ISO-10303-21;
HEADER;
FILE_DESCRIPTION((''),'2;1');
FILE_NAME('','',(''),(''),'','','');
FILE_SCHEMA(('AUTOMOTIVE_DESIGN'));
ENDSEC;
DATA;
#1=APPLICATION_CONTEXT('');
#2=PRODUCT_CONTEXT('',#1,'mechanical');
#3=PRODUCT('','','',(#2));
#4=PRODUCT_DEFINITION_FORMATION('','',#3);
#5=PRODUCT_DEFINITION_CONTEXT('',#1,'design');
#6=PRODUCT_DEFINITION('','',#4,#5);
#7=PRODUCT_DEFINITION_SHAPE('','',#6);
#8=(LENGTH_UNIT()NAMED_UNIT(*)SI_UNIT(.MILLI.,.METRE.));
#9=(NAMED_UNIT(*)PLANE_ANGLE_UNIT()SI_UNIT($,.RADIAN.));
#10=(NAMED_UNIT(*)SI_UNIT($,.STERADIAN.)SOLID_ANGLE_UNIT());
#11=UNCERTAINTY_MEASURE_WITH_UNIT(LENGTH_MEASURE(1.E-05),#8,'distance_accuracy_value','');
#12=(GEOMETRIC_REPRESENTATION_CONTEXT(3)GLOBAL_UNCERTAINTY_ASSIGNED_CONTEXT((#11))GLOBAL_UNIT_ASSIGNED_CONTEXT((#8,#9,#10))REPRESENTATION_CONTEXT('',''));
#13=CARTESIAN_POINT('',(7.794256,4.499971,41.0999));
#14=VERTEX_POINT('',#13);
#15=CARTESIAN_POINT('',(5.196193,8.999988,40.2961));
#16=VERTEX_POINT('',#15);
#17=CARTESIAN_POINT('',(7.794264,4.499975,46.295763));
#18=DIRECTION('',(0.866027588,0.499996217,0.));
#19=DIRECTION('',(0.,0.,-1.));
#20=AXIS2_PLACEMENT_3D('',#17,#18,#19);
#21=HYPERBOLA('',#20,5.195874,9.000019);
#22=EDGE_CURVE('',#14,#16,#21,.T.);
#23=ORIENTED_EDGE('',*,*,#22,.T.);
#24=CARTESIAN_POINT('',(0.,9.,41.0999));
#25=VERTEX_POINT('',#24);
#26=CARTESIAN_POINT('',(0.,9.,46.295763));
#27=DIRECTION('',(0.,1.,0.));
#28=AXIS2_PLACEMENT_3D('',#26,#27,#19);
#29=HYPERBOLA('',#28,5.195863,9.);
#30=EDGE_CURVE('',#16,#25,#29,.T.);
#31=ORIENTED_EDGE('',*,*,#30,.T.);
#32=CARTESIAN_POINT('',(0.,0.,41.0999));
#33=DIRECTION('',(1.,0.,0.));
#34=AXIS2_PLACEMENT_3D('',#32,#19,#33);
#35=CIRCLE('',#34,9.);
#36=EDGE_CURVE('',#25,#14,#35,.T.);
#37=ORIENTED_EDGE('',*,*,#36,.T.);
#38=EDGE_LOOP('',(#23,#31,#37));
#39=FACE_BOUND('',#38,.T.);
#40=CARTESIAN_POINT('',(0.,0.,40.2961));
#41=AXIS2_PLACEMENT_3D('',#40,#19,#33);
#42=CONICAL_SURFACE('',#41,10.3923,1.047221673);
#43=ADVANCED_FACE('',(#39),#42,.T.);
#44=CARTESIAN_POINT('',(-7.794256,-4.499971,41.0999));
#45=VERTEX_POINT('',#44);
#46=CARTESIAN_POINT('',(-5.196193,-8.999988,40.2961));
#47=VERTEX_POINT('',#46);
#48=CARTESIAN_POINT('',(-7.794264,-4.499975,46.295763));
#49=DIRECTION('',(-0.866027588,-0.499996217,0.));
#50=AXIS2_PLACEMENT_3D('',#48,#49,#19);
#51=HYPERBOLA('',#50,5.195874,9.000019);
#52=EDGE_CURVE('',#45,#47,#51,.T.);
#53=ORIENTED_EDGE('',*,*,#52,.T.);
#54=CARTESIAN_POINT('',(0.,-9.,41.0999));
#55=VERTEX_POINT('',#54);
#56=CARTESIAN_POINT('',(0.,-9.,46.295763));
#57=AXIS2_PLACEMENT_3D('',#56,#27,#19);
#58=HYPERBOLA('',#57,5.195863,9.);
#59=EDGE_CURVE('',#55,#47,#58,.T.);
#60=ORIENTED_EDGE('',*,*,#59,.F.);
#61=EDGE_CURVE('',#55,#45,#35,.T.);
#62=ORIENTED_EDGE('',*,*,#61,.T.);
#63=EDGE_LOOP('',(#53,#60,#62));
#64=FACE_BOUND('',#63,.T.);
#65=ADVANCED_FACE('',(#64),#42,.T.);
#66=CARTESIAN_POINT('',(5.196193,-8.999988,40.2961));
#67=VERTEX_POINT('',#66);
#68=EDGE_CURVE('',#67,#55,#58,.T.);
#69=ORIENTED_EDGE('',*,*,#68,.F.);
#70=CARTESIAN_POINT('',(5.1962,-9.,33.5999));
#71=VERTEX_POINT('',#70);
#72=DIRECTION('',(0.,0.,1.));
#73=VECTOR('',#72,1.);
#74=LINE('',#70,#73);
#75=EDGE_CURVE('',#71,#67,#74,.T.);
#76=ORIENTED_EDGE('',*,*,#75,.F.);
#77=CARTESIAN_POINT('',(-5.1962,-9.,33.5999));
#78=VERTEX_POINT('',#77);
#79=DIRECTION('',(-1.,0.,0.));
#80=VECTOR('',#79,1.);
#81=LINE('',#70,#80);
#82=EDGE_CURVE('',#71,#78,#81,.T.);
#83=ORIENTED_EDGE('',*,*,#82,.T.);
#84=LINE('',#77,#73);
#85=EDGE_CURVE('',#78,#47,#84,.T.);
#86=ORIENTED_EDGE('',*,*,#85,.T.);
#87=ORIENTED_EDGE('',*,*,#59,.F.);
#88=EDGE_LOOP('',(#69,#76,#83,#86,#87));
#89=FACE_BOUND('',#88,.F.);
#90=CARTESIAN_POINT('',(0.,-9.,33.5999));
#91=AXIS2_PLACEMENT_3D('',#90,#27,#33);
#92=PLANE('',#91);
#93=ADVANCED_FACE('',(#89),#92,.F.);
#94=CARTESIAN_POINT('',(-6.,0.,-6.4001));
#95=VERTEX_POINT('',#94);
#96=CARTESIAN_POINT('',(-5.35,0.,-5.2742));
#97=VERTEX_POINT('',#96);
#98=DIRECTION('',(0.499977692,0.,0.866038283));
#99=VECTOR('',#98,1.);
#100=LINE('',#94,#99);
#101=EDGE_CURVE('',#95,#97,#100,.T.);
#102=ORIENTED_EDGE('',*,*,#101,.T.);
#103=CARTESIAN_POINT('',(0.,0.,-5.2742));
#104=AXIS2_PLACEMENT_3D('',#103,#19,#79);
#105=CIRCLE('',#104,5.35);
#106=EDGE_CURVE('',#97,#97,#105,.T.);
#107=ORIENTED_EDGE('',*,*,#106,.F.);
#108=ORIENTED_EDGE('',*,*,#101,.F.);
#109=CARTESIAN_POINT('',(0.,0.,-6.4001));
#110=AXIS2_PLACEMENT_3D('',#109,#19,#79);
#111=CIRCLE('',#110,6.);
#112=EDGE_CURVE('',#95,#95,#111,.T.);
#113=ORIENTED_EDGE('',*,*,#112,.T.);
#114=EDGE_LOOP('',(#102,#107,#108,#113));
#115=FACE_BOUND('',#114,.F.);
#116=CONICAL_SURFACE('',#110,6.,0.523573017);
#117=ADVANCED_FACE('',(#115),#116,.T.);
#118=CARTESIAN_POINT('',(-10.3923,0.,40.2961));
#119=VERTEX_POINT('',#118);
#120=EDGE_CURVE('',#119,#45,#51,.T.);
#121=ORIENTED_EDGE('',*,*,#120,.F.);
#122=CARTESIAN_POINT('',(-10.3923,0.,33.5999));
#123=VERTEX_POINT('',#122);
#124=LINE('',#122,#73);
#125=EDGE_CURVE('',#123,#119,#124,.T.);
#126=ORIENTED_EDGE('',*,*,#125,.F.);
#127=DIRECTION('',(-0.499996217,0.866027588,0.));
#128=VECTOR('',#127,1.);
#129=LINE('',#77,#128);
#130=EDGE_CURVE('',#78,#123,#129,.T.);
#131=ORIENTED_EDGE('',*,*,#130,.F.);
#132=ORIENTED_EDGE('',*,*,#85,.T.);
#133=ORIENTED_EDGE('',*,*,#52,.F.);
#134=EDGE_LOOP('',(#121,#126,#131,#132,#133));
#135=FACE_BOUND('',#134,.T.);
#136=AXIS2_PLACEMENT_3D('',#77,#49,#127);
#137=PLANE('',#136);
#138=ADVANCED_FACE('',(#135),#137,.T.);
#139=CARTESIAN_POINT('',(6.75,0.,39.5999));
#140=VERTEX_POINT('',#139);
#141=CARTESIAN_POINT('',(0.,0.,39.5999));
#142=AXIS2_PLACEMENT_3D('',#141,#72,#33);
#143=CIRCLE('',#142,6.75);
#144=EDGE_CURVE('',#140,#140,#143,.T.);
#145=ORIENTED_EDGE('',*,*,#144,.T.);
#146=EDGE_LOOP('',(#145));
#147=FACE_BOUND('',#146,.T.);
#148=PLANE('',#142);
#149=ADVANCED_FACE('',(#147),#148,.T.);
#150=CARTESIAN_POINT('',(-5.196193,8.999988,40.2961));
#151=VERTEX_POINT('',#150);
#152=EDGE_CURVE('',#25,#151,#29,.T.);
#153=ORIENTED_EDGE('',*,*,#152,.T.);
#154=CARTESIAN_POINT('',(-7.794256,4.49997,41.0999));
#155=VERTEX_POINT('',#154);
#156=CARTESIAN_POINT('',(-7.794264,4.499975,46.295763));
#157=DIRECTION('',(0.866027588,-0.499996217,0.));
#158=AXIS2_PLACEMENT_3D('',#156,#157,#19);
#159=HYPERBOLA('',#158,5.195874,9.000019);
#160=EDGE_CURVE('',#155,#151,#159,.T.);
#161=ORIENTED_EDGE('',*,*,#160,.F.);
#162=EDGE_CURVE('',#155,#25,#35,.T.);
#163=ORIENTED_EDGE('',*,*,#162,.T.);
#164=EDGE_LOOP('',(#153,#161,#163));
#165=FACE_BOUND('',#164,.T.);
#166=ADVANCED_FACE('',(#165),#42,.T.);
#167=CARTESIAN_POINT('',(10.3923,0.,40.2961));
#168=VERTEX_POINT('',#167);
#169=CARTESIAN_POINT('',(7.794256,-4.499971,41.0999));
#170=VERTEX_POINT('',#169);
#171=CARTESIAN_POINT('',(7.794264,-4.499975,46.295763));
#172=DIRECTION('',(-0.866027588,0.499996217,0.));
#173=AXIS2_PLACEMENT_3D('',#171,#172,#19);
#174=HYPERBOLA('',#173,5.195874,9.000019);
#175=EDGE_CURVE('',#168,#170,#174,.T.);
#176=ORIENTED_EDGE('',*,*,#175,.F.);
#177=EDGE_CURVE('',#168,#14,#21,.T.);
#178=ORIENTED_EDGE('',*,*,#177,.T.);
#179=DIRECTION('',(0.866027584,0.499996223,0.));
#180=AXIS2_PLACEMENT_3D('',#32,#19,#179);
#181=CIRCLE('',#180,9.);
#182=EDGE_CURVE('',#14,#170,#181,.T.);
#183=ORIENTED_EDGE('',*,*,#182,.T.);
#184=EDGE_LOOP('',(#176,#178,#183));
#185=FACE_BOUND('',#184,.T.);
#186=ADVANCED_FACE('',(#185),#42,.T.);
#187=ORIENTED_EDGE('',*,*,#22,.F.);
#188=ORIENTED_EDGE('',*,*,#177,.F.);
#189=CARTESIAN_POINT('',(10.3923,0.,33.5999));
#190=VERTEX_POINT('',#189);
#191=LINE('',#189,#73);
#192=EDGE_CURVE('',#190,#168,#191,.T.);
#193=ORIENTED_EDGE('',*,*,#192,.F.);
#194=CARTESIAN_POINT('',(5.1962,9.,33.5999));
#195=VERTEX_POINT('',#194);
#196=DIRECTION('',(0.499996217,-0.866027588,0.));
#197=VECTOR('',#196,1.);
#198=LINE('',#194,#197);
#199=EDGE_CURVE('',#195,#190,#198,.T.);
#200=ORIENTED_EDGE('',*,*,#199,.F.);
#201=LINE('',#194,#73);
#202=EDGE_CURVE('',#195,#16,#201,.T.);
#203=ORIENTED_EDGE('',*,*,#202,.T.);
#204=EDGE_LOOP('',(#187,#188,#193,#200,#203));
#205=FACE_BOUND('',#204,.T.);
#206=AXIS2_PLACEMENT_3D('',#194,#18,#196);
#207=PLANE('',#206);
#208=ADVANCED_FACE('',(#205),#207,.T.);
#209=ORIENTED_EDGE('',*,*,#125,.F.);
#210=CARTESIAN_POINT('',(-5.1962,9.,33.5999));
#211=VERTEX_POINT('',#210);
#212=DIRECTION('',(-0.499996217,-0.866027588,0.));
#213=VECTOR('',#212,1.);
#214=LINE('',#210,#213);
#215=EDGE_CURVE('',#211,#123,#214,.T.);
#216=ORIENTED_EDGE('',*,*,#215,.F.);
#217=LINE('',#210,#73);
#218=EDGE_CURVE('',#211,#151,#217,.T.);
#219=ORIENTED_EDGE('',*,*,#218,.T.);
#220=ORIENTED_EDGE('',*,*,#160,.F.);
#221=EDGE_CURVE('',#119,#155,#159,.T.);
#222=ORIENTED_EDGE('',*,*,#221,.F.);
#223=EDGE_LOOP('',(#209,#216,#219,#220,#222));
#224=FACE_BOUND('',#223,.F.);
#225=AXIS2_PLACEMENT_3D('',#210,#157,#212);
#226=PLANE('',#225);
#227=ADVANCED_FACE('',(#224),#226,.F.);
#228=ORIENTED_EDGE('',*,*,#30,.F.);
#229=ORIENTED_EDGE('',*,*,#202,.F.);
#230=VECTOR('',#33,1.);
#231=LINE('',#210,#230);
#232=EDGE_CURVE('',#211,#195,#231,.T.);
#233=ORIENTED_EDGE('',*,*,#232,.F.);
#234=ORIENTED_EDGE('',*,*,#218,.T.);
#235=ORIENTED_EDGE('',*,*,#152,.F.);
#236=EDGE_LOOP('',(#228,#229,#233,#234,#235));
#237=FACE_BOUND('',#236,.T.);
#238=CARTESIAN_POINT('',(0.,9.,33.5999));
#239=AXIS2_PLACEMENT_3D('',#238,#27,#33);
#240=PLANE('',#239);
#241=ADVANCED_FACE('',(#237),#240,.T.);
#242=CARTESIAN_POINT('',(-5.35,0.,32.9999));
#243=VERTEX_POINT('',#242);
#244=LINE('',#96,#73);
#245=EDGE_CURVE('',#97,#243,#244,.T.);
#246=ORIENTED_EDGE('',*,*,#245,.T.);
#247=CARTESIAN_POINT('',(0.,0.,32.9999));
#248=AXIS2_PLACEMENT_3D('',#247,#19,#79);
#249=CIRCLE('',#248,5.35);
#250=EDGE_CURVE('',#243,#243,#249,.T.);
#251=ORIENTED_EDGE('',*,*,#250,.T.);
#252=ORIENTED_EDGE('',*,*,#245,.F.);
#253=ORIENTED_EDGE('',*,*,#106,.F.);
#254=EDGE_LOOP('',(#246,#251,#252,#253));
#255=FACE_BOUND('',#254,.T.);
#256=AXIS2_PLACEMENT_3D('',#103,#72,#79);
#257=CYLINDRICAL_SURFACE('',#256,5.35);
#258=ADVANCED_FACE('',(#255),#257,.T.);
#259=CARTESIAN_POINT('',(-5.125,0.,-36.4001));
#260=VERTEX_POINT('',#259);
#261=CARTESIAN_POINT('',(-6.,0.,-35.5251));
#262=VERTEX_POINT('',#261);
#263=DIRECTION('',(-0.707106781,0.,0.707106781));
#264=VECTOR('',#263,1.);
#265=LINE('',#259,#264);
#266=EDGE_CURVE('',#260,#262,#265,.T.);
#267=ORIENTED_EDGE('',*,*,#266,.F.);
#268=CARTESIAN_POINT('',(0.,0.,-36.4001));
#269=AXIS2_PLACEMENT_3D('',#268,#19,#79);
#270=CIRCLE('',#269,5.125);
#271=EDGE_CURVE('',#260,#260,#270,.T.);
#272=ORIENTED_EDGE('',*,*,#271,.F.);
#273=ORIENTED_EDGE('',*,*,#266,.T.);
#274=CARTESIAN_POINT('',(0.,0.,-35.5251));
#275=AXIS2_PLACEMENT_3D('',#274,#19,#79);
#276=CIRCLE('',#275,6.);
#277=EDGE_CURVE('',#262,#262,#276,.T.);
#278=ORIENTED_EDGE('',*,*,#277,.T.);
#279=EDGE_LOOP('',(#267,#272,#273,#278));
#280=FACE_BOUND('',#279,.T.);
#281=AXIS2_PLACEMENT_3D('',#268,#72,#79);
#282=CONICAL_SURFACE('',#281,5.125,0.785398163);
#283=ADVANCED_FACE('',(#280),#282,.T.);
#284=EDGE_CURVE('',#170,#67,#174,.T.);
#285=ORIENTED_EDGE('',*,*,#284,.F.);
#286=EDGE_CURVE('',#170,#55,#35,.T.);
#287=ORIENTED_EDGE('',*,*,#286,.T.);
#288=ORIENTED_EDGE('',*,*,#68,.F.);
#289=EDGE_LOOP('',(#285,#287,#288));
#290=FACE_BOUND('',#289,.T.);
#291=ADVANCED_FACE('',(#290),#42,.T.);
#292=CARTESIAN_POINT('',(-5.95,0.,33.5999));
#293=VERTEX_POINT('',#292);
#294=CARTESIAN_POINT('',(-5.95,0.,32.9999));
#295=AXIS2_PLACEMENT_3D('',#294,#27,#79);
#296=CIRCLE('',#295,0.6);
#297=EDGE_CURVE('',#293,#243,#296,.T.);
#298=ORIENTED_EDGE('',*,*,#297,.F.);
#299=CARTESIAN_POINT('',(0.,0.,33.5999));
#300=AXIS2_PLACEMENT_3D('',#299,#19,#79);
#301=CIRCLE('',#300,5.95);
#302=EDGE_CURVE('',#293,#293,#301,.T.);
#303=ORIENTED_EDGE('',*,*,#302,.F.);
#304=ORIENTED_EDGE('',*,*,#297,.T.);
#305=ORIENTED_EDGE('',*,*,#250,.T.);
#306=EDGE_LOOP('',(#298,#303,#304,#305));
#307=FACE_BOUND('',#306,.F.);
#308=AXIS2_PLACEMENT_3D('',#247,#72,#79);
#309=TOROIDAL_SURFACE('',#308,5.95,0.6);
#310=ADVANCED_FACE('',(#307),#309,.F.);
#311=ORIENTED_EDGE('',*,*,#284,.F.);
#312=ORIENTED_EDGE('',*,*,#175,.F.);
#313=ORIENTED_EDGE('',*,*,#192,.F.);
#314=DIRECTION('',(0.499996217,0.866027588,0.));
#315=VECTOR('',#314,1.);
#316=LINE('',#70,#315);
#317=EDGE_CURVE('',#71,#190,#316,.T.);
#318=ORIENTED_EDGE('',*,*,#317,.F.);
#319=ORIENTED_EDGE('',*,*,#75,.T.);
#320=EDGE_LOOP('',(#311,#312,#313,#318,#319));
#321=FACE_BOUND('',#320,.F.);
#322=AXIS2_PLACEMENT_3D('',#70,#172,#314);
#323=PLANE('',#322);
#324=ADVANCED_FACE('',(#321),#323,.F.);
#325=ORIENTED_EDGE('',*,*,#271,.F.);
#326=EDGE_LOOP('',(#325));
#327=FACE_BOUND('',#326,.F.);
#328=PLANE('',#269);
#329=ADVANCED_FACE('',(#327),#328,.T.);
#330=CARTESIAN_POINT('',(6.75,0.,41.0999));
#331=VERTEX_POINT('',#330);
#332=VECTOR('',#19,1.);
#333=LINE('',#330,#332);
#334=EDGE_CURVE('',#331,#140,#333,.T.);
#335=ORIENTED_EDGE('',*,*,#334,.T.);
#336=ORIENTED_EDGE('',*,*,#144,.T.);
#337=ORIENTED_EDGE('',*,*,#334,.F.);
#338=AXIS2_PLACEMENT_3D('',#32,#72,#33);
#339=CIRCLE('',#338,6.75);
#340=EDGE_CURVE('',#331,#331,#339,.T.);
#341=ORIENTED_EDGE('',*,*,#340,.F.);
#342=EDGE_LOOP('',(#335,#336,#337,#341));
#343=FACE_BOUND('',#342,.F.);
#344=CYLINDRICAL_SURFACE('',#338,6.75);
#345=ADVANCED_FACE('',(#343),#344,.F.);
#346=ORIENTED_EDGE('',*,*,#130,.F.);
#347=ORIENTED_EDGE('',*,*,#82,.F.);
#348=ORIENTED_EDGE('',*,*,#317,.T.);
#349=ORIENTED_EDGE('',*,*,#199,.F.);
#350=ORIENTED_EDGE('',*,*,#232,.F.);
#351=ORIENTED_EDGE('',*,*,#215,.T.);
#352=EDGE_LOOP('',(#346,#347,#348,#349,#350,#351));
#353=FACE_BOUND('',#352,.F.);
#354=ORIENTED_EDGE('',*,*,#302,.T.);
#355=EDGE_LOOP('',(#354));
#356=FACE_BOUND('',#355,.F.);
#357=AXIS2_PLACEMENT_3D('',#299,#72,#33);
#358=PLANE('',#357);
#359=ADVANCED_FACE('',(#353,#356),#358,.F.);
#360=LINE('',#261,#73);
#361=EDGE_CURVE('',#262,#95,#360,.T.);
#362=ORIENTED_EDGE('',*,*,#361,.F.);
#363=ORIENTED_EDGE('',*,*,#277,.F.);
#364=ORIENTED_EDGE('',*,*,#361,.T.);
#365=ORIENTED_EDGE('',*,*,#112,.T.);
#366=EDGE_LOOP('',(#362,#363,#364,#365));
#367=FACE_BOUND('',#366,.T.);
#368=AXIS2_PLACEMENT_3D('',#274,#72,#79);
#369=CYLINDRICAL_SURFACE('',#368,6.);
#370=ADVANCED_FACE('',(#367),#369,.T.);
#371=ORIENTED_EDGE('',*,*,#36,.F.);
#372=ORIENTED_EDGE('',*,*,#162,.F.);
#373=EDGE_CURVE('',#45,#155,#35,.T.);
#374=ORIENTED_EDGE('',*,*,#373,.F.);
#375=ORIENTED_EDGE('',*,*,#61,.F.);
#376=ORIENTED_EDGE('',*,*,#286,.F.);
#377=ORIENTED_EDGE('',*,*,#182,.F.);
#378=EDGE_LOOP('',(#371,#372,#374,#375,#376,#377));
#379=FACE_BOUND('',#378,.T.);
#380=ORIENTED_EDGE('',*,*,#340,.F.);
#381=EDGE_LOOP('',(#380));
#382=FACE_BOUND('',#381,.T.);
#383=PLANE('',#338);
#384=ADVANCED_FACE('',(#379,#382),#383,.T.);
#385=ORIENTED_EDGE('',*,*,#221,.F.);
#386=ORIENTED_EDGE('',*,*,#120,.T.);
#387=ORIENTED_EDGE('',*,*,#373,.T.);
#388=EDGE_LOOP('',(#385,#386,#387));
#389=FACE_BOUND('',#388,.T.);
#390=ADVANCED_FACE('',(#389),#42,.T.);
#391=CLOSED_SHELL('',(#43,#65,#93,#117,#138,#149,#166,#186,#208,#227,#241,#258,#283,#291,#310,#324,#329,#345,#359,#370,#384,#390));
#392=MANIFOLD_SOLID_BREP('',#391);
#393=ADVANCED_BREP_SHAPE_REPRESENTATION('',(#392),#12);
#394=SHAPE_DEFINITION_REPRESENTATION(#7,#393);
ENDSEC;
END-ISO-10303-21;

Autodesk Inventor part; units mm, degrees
ref_plane "YZ Plane" through (0, 0, 0) normal (1, 0, 0) x (0, 1, 0)
sketch "Sketch2" plane through (0, 0, 0) normal (0, 1, 0) x (-1, 0, 0)
  line L0 (0, 33.5999) -> (0, -36.4001)
  line L1 (0, -36.4001) -> (5.125, -36.4001)
  line L2 (6, -35.5251) -> (6, -6.4001)
  line L3 (6, -6.4001) -> (5.35, -5.2742)
  line L4 (5.35, -5.2742) -> (5.35, 33.5999)
  line L5 (5.35, 33.5999) -> (0, 33.5999)
  line L6 (5.125, -36.4001) -> (6, -35.5251)
  line L7 (6, -36.4001) -> (6, -37.6375)
  line L8 (0, -51.885) -> (0, 47.8474) projected
  dimension "Ds" = 10.7
  dimension "NND" = 12
  dimension "b" = 30
  dimension "d3" = 30
  dimension "d5" = 45
  dimension "PTC" = 1.75
  dimension "NLG" = 70
revolve "Revolution1" add sketch "Sketch2" angle 360 about axis through (0, 0, 33.5999) along (0, 0, -1)
sketch "Sketch3" plane through (0, 0, 33.5999) normal (0, 0, 1) x (1, 0, 0)
  circle A0 centre (0, 0) radius 5.35 projected
  line L0 (0, 9) -> (5.1962, 9)
  line L1 (5.1962, 9) -> (10.3923, 0)
  line L2 (10.3923, 0) -> (0, 0)
  line L3 (0, 0) -> (0, 9)
  line L4 (0, 9) -> (-5.1962, 9)
  line L5 (-5.1962, 9) -> (-10.3923, 0)
  line L6 (0, -9) -> (5.1962, -9)
  line L7 (5.1962, -9) -> (10.3923, 0)
  line L8 (-5.1962, -9) -> (-10.3923, 0)
  line L9 (0, -9) -> (-5.1962, -9)
  dimension "d9" = 60
  dimension "ParS" = 18
  dimension "msp_d11" = 18
extrude "Extrusion1" add sketch "Sketch3" along normal blind 7.5
sketch "Sketch4" plane through (0, 0, 0) normal (0, 1, 0) x (-1, 0, 0)
  line L0 (-9, 41.0999) -> (-10.3923, 41.0999)
  line L1 (-10.3923, 41.0999) -> (-10.3923, 40.2961)
  line L2 (-10.3923, 40.2961) -> (-9, 41.0999)
  line L3 (0, 24.3945) -> (0, 43.8842) projected
  line L4 (0, 27.9826) -> (0, 27.1787)
  line L5 (-10.3923, 33.5999) -> (-10.3923, 41.0999) projected
  line L6 (-5.1962, 41.0999) -> (-10.3923, 41.0999) projected
  dimension "d14" = 30
  dimension "msp_d15" = 18
revolve "Revolution2" cut sketch "Sketch4" angle 360 about axis through (0, 0, 27.9826) along (0, 0, -1)
sketch "Sketch5" plane through (0, 0, 41.0999) normal (0, 0, 1) x (1, 0, 0)
  arc A0 (7.7942, 4.5) -> (0, 9) centre (0, 0) ccw projected
  circle A1 centre (0, 0) radius 6.75
  dimension "d27" = 13.5
extrude "Extrusion2" cut sketch "Sketch5" against normal blind 1.5
thread "Thread1" size "M12x1.75" class "6g" standard "ISO Metric profile" full length
ref_plane "MSC_PF1" through (0, 0, 0) normal (0, 1, 0) x (-1, 0, 0)
ref_plane "MSC_PT1" through (0, 0, 33.5999) normal (0, 0, -1) x (-1, 0, 0)
fillet "Fillet1" radius 0.6 1 edges at (5.35, 0, 33.5999)
equation "\"msp_d11\" = ParS"
equation "\"msp_d15\" = ParS"
equation "\"d27\" = 0.75 * ParS"
equation "\"d28\" = 0.2 * ParK"
equation "\"d30\" = r"
equation "\"msp_d17\" = b"
equation "\"r\" = 0.6"
equation "\"THREADDIA\" = NND"
equation "\"ParK\" = 7.5"
properties part number "ISO 4015 - M12 x 70" material "Stainless Steel, 440C"
